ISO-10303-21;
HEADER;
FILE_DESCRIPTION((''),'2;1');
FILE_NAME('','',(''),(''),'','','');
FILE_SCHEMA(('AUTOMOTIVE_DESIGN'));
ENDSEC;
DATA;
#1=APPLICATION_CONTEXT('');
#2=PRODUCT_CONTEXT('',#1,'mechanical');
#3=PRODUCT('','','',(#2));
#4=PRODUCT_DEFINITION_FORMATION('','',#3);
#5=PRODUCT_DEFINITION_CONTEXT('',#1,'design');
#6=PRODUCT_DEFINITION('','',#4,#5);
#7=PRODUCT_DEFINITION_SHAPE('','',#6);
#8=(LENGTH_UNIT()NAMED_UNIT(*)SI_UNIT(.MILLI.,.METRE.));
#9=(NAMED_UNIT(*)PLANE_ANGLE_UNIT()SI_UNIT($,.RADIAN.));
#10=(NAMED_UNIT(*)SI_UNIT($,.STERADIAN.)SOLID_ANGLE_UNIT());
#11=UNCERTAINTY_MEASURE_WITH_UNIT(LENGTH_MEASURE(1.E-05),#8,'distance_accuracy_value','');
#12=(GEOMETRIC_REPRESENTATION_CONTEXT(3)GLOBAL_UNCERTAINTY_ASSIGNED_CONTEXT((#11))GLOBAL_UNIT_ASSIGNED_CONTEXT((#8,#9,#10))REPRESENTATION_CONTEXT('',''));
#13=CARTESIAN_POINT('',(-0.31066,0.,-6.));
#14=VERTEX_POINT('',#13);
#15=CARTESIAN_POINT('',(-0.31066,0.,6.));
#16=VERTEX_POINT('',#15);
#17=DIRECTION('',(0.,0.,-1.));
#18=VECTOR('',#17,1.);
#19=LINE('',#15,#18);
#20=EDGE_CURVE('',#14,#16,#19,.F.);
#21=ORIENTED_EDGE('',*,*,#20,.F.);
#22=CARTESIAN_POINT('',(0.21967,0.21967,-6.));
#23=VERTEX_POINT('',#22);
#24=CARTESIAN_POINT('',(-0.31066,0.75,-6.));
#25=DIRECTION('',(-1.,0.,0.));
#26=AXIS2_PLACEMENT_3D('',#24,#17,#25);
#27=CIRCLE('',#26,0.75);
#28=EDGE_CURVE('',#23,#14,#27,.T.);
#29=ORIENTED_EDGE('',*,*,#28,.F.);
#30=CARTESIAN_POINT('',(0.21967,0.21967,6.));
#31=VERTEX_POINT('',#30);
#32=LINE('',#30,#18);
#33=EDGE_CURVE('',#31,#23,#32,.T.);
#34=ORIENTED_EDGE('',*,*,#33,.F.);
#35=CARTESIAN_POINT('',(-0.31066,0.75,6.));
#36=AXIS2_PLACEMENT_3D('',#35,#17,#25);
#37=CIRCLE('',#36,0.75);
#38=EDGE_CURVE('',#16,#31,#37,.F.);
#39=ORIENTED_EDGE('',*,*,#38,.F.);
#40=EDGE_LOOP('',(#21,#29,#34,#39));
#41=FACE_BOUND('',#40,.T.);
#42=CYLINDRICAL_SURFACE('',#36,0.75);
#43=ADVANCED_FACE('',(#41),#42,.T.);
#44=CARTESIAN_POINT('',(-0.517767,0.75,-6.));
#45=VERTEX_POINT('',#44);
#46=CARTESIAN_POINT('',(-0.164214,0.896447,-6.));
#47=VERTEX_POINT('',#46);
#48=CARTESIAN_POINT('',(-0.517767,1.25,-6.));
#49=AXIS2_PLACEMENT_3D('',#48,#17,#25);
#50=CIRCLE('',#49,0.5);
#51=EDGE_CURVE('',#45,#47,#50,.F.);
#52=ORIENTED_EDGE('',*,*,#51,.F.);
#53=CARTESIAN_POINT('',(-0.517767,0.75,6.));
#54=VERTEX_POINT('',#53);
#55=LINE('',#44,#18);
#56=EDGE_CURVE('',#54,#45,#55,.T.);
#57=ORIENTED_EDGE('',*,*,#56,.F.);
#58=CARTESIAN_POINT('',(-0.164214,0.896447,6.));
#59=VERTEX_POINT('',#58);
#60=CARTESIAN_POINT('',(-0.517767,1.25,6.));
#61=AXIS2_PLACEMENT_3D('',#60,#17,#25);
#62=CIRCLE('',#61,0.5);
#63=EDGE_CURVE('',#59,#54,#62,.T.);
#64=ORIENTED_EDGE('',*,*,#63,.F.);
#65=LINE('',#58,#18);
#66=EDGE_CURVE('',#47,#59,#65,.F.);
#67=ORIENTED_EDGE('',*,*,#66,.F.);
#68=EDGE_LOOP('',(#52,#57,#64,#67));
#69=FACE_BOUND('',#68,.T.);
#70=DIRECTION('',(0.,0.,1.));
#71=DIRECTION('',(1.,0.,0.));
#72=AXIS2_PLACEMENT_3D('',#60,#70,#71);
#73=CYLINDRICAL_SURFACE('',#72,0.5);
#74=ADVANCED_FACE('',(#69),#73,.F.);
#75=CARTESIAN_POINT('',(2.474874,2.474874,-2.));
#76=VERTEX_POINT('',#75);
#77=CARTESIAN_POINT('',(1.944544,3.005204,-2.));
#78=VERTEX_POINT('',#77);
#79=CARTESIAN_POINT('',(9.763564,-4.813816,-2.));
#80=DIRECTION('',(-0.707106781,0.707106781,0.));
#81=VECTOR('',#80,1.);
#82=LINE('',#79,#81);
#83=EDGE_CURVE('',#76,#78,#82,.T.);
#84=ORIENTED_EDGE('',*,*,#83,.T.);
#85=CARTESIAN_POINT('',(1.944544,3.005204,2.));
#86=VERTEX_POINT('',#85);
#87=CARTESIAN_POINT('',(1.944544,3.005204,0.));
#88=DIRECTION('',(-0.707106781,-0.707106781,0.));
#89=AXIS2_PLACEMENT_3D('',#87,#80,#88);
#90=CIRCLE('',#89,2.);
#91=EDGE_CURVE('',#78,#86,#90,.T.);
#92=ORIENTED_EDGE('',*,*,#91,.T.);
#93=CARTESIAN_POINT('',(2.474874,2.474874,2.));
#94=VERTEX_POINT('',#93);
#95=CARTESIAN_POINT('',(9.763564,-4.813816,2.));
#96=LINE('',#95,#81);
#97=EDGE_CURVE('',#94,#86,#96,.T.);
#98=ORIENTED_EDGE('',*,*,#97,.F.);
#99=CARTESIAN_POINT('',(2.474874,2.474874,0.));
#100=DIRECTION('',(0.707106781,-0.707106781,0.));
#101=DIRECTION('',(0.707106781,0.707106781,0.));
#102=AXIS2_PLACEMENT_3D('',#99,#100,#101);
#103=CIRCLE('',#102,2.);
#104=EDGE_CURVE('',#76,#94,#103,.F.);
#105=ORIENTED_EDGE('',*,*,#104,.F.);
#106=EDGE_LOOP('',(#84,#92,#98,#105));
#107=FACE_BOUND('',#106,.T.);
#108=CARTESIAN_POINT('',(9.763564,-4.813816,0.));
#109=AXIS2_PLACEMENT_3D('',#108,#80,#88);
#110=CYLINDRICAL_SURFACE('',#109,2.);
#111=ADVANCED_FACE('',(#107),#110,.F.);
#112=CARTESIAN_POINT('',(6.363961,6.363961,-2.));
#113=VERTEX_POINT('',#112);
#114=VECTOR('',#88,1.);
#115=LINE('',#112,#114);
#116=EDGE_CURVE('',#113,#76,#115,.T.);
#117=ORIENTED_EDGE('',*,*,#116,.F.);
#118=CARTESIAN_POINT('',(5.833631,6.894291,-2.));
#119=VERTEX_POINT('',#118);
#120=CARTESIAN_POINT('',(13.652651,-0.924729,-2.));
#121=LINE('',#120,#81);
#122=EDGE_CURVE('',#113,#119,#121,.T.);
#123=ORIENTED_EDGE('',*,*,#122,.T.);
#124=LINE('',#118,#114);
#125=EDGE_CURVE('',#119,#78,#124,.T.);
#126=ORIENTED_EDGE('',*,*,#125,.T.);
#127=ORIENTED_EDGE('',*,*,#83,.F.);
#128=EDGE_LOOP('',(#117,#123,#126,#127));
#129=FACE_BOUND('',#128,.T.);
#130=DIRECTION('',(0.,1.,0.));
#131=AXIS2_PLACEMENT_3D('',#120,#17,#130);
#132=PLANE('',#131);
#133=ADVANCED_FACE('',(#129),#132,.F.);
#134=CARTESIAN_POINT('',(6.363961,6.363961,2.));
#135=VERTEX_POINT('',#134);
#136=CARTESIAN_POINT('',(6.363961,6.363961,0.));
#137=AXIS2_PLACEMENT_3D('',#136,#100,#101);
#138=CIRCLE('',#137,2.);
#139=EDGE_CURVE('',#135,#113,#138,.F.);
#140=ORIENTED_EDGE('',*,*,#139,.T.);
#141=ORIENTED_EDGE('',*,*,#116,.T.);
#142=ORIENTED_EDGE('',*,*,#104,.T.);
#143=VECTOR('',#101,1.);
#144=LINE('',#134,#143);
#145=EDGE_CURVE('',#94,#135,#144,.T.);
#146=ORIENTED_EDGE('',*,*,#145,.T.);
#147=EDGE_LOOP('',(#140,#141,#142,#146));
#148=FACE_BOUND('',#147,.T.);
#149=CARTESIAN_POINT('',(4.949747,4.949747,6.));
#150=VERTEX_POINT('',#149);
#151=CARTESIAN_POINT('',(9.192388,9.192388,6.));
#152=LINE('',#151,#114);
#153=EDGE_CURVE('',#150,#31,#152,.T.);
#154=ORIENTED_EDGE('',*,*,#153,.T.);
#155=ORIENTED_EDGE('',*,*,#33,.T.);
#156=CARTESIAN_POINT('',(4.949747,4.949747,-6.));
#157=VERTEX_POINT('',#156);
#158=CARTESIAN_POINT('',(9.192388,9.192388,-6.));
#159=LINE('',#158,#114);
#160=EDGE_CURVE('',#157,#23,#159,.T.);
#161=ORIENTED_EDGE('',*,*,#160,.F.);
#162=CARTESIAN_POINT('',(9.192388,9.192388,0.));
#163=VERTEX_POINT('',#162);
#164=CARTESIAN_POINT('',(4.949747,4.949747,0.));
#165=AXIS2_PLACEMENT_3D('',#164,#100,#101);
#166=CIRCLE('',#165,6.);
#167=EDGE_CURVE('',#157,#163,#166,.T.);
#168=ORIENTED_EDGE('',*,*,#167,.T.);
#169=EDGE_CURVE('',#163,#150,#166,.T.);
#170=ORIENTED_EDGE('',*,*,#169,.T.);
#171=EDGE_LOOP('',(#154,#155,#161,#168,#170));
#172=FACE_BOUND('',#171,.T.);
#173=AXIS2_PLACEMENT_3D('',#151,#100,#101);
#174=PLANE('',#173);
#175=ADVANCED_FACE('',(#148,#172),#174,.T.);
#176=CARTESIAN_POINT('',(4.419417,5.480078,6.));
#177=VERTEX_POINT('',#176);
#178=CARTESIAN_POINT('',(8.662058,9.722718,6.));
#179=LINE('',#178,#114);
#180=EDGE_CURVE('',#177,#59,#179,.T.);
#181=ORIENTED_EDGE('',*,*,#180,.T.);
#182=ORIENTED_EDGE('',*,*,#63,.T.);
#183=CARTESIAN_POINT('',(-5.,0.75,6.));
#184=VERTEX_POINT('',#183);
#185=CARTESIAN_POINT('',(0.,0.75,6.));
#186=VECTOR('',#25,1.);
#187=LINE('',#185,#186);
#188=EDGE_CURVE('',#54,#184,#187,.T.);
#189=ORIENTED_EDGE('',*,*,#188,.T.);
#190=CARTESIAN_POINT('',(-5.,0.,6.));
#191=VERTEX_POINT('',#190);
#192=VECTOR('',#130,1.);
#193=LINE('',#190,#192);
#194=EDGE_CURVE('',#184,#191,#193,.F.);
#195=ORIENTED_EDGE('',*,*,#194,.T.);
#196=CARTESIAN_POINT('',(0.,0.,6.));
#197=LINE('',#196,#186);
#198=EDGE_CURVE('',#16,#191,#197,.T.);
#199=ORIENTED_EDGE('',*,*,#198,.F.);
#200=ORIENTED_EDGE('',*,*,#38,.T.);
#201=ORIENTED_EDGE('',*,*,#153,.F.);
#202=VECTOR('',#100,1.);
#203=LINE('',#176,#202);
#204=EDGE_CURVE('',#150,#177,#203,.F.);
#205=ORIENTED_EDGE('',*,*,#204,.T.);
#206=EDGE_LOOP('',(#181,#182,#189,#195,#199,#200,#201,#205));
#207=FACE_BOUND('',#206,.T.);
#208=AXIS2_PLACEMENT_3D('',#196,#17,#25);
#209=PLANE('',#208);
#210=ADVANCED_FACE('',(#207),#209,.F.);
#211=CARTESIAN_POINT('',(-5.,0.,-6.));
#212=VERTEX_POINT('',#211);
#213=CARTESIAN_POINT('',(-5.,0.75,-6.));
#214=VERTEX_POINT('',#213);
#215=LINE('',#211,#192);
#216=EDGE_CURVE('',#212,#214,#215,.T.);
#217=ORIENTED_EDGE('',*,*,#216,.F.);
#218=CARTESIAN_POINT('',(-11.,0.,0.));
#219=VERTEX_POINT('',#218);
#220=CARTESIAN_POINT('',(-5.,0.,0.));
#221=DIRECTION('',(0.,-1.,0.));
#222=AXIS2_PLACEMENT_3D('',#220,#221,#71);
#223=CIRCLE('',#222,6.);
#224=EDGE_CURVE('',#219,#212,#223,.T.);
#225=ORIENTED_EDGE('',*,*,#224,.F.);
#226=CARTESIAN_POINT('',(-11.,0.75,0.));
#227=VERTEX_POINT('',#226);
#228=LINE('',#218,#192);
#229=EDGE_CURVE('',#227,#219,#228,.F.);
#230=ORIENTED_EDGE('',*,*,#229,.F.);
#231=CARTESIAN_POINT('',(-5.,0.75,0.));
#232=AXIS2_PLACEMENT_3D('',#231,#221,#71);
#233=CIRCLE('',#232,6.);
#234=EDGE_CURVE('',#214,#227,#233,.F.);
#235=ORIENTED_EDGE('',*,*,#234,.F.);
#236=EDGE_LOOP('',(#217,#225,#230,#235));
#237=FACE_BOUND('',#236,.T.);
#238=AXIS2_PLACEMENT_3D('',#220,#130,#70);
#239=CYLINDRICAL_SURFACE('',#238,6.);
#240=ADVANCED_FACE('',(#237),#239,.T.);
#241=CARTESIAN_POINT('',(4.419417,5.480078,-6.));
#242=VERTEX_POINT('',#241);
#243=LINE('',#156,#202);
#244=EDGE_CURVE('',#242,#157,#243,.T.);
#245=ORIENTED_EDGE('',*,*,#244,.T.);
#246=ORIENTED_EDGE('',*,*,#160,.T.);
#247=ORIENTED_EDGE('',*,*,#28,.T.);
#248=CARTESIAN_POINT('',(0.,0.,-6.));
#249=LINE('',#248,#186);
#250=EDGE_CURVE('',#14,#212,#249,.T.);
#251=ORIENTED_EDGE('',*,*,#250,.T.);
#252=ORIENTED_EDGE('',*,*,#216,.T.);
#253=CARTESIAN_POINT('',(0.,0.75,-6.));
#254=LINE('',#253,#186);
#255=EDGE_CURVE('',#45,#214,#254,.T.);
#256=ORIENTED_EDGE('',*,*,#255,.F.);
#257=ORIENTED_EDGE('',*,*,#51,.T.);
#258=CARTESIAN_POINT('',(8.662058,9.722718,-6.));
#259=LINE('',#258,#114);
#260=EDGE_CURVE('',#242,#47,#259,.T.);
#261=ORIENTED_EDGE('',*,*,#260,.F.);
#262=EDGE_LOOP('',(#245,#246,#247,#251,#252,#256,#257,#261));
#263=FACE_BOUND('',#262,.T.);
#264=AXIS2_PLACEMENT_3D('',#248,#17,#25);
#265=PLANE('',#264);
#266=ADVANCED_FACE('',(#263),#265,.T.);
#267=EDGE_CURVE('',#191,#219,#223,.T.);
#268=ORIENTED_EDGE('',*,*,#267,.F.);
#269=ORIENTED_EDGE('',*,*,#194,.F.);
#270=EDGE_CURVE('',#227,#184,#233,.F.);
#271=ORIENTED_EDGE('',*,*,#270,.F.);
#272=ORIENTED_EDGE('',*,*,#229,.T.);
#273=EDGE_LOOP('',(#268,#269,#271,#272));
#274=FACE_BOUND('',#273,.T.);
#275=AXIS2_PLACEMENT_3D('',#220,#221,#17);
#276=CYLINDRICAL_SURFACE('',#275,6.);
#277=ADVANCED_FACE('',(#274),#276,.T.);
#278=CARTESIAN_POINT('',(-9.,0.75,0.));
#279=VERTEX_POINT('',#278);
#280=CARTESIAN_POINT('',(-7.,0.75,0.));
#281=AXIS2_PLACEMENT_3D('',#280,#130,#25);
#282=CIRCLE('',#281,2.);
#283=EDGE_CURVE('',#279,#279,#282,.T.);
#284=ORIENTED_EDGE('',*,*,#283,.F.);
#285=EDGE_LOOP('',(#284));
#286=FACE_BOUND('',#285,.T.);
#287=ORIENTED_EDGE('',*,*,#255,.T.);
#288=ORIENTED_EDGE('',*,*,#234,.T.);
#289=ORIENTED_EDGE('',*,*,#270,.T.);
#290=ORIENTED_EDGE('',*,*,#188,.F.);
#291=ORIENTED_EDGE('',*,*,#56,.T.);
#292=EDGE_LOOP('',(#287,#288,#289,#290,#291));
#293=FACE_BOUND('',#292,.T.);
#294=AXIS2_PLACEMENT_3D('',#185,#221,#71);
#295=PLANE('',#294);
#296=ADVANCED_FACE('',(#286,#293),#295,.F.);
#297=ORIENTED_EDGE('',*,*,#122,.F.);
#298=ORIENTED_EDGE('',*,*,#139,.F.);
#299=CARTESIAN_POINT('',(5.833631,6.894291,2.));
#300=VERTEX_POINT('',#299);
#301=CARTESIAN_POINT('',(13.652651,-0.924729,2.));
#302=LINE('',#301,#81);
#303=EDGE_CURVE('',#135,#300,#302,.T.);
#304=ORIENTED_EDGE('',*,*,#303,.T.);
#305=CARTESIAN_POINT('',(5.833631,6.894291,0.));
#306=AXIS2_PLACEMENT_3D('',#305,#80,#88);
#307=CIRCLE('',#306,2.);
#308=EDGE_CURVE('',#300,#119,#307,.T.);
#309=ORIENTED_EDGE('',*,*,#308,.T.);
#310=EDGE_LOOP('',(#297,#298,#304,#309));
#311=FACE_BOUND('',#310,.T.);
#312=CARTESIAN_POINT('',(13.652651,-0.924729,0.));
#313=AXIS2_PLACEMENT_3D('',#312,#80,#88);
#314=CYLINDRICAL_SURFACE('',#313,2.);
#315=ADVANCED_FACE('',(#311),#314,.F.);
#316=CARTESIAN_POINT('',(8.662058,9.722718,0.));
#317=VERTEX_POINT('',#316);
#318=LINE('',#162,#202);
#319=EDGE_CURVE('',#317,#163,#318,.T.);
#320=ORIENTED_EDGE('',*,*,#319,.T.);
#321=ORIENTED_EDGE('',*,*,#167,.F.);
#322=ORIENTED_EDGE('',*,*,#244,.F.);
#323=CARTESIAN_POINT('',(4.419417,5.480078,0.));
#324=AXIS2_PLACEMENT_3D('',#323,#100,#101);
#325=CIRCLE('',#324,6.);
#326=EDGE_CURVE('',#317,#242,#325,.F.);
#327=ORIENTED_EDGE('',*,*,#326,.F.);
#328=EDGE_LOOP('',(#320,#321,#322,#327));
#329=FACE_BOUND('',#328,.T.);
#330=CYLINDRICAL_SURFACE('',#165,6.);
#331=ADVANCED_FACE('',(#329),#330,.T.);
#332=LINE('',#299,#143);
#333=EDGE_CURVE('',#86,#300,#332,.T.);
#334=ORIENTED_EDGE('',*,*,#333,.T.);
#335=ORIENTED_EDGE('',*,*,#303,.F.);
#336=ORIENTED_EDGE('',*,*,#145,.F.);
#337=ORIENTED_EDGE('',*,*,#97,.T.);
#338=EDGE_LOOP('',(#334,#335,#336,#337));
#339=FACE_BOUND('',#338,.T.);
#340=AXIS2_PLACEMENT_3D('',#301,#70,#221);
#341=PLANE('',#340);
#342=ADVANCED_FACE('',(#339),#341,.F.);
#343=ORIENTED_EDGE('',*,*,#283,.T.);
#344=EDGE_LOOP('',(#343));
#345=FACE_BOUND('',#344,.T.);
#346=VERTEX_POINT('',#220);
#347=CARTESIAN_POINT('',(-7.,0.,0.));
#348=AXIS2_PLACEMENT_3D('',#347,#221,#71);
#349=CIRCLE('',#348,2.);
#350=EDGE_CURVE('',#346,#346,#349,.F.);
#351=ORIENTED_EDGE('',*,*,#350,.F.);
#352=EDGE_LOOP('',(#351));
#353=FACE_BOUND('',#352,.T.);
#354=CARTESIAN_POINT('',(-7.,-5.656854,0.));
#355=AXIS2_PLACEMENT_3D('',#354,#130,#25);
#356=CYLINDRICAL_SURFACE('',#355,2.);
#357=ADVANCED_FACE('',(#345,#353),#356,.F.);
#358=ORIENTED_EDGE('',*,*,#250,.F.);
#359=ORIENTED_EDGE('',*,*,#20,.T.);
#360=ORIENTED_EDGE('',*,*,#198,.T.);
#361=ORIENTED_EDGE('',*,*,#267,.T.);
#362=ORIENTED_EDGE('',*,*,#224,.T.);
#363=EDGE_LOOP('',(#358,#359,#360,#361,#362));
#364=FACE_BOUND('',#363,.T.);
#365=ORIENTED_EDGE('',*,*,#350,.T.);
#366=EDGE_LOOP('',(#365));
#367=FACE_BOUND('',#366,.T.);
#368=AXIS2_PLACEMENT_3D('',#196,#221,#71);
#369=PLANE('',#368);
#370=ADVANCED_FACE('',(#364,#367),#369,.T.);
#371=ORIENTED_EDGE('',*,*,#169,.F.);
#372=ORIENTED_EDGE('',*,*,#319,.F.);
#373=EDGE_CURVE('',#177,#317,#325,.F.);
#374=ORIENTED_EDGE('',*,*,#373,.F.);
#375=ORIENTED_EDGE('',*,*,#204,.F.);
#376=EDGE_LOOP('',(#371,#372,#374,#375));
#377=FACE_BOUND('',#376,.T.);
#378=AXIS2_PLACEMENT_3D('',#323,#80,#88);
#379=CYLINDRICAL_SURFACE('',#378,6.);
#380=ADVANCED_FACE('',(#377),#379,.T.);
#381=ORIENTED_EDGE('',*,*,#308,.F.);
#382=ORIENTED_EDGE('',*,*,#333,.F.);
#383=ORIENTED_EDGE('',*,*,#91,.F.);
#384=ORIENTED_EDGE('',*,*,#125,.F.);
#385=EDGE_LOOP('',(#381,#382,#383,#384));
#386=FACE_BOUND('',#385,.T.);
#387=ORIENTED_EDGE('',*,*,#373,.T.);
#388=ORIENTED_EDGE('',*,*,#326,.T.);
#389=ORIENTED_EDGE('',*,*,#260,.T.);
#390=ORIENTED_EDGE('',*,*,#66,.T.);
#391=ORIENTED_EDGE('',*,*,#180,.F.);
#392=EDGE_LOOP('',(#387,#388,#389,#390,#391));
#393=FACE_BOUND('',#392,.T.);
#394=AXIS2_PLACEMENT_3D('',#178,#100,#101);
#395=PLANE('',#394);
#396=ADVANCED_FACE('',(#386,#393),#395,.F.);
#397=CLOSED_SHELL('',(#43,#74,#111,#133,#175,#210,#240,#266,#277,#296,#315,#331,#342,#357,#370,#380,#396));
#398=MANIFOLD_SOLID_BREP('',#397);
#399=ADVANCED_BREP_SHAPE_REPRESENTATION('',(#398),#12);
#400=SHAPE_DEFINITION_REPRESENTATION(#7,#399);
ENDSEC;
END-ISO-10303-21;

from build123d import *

# Parameters (mm, degrees)
ESTRUSIONE_SOTTILE1_DEPTH = 6
RACCORDO3_R               = 6
SCHIZZO4_R                = 2
TAGLIO_ESTRUSIONE1_DEPTH  = 0.75
TAGLIO_ESTRUSIONE2_DEPTH  = 0.75
RACCORDO1_R               = 0.75
RACCORDO2_R               = 0.5


with BuildPart() as part:
    # Schizzo1 → Estrusione-Sottile1 (new, symmetric)
    with BuildSketch(Plane.XY):
        Polygon((9.192388155, 9.192388155), (0, 0), (-11, 0), (-11, 0.75), (-0.310660172, 0.75), (8.66205807, 9.722718241), align=None)
    extrude(amount=ESTRUSIONE_SOTTILE1_DEPTH, both=True)

    # Raccordo3
    raccordo3_edges = [part.edges().sort_by_distance(p)[0] for p in [
        (-11, 0.375, 6),
        (-11, 0.375, -6),
        (8.927223112, 9.457553198, -6),
        (8.927223112, 9.457553198, 6),
    ]]
    fillet(raccordo3_edges, radius=RACCORDO3_R - 0.0001)  # a hair under: the kernel refuses the full size

    # Schizzo4 → Taglio-Estrusione1 (cut)
    with BuildSketch(Plane(origin=(0, 0.75, 0), x_dir=(1, 0, 0), z_dir=(0, 1, 0))):
        with Locations(Location((-7, 0, 0), (0, 0, 180))):
            Circle(SCHIZZO4_R)
    extrude(amount=-TAGLIO_ESTRUSIONE1_DEPTH, mode=Mode.SUBTRACT)

    # Schizzo5 → Taglio-Estrusione2 (cut)
    with BuildSketch(Plane(origin=(-0.530330086, 0.530330086, 0), x_dir=(0, 0, 1), z_dir=(-0.7071067811865491, 0.7071067811865459, 0))):
        with BuildLine():
            Line((2, 9), (2, 3.5))
            ThreePointArc((2, 3.5), (0, 1.5), (-2, 3.5))
            Line((-2, 3.5), (-2, 9))
            ThreePointArc((-2, 9), (0, 11), (2, 9))
        make_face()
    extrude(amount=-TAGLIO_ESTRUSIONE2_DEPTH, mode=Mode.SUBTRACT)

    # Raccordo1
    raccordo1_edges = [part.edges().sort_by_distance(p)[0] for p in [
        (0, 0, 0),
    ]]
    fillet(raccordo1_edges, radius=RACCORDO1_R)

    # Raccordo2
    raccordo2_edges = [part.edges().sort_by_distance(p)[0] for p in [
        (-0.310660172, 0.75, 0),
    ]]
    fillet(raccordo2_edges, radius=RACCORDO2_R)


solid = part.part
